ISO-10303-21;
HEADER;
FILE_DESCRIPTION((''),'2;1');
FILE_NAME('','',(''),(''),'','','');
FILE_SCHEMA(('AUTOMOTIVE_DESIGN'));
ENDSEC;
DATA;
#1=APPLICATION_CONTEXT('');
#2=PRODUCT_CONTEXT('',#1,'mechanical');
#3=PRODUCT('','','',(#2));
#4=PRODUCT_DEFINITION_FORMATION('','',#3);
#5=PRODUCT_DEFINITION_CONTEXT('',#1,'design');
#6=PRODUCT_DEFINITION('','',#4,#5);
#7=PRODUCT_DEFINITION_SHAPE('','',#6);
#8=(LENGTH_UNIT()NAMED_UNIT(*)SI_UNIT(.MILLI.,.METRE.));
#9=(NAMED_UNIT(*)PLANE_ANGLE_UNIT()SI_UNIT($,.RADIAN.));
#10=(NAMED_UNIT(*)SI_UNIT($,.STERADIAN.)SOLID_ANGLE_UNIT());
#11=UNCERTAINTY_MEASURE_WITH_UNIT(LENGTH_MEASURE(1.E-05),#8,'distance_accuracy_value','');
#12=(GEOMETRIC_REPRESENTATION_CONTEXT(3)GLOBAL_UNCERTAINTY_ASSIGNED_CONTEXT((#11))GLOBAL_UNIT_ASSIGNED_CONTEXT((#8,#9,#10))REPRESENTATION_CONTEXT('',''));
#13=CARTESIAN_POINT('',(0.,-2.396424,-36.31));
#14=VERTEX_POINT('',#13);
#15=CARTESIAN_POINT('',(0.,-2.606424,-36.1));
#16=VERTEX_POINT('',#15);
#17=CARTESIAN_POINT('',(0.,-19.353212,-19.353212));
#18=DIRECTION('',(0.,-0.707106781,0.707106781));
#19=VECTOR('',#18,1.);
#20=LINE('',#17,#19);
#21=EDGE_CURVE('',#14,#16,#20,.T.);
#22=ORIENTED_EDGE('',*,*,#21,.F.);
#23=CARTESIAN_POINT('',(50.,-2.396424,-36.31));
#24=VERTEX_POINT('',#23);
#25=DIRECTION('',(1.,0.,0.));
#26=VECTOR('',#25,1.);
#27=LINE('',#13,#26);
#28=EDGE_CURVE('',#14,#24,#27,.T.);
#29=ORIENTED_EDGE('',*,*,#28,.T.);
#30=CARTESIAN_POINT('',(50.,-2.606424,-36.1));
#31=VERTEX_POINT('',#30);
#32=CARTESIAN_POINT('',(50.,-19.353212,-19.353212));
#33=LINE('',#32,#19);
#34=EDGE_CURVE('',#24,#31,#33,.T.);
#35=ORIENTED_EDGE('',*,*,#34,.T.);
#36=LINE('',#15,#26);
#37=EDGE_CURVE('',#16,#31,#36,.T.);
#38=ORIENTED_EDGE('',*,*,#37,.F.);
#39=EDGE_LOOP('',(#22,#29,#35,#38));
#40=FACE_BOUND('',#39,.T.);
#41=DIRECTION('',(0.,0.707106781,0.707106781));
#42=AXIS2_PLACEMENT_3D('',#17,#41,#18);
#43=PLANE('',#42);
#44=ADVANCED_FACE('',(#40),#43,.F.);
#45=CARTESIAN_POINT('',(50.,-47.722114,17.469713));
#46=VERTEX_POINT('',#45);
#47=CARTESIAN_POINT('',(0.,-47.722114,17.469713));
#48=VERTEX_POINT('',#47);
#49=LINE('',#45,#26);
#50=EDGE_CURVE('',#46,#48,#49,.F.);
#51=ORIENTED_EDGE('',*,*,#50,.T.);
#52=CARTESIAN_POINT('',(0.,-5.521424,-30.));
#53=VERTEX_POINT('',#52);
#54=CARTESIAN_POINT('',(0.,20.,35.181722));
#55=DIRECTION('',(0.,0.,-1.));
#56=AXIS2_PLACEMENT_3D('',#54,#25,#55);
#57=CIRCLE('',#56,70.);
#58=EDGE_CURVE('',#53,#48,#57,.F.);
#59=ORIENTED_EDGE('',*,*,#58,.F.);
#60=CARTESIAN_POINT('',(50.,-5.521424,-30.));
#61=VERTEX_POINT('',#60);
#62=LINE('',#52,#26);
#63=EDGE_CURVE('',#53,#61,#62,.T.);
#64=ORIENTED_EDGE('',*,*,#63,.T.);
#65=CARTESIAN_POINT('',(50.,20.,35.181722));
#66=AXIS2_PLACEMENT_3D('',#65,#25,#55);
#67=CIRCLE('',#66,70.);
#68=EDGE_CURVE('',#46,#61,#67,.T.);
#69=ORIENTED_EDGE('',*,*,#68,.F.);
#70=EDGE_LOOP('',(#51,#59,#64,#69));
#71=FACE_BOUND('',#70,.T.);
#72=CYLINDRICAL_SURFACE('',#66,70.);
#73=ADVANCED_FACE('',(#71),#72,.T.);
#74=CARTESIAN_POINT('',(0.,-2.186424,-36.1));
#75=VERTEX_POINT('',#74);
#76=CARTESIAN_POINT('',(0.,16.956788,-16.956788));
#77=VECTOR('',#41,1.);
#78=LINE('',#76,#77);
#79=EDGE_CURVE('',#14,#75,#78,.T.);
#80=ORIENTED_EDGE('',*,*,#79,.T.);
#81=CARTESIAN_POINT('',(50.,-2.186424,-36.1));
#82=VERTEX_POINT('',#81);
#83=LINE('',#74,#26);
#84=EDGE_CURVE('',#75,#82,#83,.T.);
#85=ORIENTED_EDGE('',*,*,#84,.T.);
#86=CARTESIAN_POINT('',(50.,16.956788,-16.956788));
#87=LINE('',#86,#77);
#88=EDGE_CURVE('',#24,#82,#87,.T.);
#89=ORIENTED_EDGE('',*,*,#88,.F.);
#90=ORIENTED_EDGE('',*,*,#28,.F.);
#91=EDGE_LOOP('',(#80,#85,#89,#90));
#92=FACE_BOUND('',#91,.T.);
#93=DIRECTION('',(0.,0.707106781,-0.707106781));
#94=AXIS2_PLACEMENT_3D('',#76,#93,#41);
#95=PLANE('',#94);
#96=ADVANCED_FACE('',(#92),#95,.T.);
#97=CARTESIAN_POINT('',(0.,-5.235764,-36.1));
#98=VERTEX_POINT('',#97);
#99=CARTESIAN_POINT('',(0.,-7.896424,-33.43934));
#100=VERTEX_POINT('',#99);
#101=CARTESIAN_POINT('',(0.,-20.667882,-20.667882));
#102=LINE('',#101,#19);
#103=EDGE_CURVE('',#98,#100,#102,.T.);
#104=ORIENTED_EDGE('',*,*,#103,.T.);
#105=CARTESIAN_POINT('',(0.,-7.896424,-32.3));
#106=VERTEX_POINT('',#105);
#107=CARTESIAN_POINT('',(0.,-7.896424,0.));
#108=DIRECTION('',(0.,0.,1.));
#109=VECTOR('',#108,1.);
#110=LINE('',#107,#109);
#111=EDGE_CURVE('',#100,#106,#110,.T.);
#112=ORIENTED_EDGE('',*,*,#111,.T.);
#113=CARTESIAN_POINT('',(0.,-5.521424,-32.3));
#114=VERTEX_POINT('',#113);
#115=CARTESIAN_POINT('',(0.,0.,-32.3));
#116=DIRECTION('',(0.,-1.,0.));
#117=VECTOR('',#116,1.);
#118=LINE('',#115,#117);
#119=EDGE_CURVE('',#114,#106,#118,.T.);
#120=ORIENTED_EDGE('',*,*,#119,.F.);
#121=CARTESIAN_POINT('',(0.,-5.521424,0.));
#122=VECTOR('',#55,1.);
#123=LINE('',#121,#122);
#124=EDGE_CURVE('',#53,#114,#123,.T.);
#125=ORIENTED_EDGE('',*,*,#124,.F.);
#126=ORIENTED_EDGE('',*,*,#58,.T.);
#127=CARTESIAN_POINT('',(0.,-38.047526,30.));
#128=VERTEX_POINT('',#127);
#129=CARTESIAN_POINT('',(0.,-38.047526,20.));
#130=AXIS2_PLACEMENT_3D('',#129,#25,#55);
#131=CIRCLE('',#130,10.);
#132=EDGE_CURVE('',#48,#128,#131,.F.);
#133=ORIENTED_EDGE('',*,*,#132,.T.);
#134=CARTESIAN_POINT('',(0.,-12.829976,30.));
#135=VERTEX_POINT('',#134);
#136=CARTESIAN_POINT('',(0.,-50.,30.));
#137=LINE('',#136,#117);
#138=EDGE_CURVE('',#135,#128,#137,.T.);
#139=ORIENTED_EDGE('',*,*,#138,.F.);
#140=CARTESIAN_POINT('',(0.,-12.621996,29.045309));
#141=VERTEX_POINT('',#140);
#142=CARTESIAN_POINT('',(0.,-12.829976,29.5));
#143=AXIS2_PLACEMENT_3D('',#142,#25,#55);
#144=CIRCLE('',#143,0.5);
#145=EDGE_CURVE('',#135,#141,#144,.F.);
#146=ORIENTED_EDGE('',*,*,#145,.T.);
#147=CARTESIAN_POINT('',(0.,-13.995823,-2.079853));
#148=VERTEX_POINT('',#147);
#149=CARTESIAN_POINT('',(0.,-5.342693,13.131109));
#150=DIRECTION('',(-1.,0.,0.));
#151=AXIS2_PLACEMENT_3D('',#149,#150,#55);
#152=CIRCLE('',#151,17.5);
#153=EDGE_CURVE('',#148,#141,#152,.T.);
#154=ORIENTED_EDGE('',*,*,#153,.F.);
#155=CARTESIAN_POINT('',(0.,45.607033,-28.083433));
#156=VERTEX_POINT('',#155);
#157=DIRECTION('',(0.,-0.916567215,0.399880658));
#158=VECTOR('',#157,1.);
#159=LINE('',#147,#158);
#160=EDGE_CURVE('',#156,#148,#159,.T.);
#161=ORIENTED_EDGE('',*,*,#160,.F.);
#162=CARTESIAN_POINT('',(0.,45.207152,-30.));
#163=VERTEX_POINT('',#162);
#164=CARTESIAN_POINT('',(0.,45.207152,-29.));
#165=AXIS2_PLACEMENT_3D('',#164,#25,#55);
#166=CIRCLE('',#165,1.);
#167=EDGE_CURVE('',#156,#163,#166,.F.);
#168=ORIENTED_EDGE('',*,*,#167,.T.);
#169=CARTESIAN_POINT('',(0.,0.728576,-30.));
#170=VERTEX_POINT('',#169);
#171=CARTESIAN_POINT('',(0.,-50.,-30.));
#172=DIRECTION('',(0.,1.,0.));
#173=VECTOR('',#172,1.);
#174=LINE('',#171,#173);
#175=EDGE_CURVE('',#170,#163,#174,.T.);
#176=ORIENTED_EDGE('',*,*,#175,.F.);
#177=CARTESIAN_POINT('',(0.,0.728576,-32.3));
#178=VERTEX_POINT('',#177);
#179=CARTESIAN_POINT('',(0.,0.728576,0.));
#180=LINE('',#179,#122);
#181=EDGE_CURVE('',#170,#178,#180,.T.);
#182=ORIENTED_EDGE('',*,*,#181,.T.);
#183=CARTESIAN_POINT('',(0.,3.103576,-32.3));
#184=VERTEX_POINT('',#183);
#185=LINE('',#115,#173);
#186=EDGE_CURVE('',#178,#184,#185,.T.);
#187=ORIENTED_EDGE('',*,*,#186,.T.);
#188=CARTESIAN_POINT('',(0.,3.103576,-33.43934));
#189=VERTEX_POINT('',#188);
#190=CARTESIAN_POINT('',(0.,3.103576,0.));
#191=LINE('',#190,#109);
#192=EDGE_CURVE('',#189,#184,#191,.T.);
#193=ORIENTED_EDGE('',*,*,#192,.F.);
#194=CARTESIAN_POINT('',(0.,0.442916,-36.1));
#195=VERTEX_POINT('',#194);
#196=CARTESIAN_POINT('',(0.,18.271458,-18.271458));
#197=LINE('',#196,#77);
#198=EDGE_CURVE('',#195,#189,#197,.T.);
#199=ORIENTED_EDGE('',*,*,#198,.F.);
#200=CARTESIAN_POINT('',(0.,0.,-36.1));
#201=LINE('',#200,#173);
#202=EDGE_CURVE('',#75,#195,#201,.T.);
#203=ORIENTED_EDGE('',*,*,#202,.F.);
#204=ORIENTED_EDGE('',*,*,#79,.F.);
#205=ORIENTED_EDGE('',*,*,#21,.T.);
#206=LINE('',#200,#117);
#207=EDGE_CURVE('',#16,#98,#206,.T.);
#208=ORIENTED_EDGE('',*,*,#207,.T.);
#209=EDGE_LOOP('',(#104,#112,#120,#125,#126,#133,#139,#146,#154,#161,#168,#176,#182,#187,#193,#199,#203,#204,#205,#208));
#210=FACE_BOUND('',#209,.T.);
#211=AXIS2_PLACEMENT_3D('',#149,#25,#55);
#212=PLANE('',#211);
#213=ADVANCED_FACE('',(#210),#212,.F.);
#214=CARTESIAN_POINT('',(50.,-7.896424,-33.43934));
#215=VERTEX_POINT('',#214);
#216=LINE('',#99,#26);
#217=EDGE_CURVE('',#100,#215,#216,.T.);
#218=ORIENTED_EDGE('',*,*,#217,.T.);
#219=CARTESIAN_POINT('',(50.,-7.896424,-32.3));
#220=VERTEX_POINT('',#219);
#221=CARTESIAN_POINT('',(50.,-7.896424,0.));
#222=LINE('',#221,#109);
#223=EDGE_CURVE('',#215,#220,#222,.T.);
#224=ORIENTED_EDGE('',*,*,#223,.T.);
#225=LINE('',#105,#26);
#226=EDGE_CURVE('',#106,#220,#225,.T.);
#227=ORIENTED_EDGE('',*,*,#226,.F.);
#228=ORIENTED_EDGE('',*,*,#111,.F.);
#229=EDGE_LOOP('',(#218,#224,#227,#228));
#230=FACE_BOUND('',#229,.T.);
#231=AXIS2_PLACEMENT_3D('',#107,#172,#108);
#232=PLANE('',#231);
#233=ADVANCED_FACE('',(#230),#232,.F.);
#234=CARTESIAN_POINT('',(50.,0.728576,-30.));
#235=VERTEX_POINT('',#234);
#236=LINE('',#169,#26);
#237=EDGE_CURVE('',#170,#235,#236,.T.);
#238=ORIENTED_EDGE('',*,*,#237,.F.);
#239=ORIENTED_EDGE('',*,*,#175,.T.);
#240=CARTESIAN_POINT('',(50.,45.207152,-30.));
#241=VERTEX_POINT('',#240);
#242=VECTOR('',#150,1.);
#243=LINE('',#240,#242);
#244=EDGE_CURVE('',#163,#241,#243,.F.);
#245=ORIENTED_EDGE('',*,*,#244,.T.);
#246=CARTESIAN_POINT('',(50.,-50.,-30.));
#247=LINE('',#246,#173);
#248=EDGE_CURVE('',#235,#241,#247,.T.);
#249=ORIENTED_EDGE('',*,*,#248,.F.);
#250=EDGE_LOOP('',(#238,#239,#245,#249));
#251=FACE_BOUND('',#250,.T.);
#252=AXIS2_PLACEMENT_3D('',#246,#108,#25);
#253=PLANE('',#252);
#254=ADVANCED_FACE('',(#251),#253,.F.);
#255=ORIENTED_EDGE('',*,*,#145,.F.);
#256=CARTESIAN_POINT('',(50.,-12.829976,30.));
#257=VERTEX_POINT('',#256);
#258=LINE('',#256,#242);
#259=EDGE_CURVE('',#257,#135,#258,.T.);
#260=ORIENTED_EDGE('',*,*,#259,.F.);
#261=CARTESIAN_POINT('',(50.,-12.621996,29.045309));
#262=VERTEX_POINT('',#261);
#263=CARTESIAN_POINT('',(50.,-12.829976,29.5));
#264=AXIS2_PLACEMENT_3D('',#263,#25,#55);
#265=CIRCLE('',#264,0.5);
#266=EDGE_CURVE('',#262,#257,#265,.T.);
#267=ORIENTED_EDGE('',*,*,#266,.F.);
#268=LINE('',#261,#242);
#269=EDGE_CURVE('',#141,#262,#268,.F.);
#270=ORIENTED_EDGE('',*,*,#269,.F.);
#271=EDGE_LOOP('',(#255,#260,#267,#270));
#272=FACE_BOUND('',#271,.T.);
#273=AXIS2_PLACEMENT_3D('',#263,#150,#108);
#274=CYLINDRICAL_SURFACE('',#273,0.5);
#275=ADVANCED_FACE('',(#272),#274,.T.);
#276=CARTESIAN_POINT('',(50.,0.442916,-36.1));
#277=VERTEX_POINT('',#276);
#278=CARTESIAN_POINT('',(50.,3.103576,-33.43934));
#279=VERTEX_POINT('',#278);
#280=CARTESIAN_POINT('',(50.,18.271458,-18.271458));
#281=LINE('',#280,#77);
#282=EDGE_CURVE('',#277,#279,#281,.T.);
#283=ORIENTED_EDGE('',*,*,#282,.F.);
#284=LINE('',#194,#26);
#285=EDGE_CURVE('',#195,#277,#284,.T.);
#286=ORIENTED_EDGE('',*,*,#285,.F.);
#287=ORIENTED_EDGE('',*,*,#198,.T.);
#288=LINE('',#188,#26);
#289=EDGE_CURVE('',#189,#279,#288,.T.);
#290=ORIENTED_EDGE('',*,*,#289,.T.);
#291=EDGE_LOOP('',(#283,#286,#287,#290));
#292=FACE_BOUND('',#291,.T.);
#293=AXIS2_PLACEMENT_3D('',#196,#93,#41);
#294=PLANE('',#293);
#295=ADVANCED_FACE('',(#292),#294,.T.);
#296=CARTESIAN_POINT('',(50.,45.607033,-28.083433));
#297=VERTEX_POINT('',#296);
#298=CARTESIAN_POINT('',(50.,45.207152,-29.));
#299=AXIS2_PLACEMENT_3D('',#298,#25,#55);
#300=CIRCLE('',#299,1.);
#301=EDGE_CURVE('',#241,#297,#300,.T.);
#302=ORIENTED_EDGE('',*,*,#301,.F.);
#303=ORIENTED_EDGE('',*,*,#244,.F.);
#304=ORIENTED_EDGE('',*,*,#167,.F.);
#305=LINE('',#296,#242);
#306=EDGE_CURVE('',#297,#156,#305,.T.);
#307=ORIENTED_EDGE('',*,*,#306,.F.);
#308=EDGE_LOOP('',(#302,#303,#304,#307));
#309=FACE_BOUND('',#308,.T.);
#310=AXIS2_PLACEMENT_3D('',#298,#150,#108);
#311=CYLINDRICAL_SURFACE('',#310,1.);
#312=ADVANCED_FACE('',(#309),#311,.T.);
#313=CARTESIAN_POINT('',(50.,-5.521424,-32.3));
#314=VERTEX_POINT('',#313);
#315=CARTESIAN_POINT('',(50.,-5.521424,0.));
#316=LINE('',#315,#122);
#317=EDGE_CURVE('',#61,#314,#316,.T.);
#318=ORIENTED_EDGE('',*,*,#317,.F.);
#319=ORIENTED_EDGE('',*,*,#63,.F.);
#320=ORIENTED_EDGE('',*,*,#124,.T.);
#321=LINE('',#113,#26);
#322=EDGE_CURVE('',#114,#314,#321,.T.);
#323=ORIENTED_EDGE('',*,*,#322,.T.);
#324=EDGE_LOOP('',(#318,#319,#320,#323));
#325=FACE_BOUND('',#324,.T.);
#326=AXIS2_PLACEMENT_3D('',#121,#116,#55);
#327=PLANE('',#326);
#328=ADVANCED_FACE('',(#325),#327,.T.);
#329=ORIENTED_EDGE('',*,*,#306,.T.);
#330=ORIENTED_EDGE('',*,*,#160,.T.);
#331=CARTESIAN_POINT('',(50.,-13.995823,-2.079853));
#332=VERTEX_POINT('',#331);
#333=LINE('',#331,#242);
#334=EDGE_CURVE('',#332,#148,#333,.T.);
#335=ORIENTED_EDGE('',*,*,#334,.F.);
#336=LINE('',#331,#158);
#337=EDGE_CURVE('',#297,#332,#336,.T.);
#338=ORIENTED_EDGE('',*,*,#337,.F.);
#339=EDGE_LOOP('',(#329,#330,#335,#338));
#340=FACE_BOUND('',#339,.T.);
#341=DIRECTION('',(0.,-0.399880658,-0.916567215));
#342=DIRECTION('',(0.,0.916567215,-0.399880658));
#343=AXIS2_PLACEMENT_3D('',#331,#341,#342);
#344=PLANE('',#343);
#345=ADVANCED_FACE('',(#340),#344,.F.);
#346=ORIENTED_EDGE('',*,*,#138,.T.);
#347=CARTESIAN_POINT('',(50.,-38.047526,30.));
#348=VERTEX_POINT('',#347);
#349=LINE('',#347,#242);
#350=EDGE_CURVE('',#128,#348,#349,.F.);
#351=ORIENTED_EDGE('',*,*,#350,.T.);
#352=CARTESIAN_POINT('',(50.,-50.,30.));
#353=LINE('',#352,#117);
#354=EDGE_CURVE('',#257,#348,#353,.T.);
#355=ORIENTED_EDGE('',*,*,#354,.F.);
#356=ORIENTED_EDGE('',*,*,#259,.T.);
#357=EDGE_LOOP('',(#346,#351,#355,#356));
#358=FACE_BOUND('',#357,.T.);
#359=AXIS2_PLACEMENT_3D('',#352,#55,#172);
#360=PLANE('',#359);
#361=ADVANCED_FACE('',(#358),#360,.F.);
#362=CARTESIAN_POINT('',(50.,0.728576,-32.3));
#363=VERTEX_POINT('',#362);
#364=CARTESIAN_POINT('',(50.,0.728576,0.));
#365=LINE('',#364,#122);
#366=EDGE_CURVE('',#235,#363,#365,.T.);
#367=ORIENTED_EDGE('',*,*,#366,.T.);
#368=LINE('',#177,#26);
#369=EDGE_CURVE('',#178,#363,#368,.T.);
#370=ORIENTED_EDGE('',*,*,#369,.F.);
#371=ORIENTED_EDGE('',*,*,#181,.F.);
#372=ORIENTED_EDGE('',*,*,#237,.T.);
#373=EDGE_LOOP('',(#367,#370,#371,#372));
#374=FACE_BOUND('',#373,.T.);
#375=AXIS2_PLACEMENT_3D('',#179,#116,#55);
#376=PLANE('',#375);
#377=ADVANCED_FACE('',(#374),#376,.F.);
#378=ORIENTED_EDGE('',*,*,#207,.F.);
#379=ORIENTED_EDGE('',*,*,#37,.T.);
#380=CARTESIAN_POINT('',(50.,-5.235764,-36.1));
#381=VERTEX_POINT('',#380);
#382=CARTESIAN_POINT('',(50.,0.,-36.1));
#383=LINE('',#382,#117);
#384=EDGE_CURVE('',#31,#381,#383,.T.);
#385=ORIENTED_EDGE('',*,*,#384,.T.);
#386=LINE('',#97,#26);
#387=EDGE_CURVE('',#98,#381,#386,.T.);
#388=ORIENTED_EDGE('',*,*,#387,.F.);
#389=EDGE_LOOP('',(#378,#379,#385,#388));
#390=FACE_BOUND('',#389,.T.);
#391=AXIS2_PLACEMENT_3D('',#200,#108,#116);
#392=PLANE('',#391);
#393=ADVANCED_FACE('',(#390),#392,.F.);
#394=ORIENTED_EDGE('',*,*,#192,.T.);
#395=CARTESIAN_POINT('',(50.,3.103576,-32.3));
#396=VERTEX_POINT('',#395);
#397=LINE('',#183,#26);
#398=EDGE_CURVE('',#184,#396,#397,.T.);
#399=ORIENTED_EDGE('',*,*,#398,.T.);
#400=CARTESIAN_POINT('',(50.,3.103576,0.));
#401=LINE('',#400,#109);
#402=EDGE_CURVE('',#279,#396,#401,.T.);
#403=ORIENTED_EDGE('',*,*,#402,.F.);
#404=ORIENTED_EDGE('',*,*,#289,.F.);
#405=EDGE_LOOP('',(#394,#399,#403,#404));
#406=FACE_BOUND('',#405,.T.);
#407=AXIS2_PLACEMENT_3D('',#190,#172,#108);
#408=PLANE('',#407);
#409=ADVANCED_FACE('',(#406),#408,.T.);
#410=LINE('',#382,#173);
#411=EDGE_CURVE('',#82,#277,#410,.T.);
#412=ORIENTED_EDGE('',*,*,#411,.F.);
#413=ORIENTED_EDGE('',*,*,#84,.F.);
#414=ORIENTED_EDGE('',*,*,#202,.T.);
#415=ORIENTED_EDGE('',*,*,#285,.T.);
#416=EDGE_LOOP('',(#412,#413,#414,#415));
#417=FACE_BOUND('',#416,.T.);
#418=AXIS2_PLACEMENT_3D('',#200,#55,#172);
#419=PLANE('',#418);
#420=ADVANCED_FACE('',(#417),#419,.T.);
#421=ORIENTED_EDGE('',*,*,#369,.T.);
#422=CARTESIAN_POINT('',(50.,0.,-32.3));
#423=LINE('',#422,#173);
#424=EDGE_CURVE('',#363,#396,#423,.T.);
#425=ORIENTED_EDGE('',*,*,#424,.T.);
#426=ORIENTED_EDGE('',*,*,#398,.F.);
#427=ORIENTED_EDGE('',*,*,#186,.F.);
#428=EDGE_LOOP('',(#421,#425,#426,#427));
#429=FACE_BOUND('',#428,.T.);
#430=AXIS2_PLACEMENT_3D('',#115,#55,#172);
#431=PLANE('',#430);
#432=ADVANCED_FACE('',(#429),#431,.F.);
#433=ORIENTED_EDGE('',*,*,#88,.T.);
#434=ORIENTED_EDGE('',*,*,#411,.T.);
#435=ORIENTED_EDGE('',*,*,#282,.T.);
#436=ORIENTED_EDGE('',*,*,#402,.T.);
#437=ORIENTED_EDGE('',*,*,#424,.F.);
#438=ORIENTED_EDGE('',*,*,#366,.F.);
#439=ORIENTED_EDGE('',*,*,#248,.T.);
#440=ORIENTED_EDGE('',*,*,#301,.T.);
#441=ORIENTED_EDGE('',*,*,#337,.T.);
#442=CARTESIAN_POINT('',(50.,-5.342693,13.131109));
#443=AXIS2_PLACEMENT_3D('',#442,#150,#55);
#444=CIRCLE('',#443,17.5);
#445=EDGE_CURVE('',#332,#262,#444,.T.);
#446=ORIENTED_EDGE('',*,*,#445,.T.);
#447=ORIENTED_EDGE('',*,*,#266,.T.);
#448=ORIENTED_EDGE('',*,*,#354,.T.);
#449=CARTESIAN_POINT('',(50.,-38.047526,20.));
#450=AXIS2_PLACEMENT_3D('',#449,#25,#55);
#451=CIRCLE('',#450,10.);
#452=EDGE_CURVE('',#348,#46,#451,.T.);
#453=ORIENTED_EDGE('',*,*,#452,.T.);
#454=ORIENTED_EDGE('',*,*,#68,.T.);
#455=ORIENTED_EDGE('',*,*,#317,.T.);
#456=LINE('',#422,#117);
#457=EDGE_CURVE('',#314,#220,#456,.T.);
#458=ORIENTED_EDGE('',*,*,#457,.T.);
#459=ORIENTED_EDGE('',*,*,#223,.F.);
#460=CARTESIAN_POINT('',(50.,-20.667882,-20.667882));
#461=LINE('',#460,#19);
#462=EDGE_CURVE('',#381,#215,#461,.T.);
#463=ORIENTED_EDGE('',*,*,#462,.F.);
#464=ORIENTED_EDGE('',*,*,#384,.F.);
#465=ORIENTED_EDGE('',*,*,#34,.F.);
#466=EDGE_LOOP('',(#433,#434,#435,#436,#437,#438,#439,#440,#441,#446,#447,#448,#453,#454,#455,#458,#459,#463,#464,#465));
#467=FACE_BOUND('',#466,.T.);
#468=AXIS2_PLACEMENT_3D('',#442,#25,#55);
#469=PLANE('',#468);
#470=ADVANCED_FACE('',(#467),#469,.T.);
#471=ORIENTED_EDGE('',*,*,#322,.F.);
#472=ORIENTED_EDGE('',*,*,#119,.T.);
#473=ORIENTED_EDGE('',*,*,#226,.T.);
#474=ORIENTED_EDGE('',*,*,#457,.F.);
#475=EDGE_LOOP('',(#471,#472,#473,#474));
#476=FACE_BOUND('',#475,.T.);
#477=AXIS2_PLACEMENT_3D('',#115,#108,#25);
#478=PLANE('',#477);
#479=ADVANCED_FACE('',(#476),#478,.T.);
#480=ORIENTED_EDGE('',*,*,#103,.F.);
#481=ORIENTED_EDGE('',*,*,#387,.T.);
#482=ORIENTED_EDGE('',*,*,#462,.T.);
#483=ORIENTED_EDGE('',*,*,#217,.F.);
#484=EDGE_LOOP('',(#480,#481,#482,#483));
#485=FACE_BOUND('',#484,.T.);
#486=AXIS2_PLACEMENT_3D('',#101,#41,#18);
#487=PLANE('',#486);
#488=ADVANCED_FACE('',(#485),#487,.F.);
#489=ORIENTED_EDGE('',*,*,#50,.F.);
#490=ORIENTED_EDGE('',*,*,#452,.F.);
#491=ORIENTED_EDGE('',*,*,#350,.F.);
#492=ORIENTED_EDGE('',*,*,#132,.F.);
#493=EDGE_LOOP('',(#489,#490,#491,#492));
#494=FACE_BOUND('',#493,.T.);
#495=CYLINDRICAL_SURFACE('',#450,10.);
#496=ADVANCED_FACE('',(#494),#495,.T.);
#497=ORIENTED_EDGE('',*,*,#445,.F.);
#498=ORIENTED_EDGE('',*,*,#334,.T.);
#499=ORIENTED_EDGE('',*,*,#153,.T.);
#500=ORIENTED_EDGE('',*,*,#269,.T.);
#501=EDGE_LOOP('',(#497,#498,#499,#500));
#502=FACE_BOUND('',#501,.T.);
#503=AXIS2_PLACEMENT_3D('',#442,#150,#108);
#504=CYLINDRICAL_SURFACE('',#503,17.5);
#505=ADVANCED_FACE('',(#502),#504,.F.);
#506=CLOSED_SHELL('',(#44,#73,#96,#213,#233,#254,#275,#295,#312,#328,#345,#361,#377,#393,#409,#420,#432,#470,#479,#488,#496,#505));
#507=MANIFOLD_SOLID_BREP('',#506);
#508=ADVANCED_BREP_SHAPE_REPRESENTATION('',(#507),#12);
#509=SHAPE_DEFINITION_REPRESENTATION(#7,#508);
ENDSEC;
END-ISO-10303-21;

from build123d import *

# Parameters (mm, degrees)
BOSS_EXTRUDE1_DEPTH = 50
FILLET1_R           = 1
FILLET2_R           = 0.5
BOSS_EXTRUDE2_DEPTH = 50
FILLET3_R           = 70
FILLET4_R           = 10


with BuildPart() as part:
    # Sketch1 → Boss-Extrude1 (new body)
    with BuildSketch(Plane(origin=(0, 0, 0), x_dir=(0, 0, -1), z_dir=(1, 0, 0))):
        with BuildLine():
            Line((-30, -50), (30, -50))
            Line((30, -50), (30, 50))
            Line((30, 50), (2.079852522, -13.995823026))
            ThreePointArc((2.079852522, -13.995823026), (-15.294169853, -22.708497617), (-30, -10))
            Line((-30, -10), (-30, -50))
        make_face()
    extrude(amount=BOSS_EXTRUDE1_DEPTH)

    # Fillet1
    fillet1_edges = [part.edges().sort_by_distance(p)[0] for p in [
        (25, 50, -30),
    ]]
    fillet(fillet1_edges, radius=FILLET1_R)

    # Fillet2
    fillet2_edges = [part.edges().sort_by_distance(p)[0] for p in [
        (25, -10, 30),
    ]]
    fillet(fillet2_edges, radius=FILLET2_R)

    # Sketch2 → Boss-Extrude2 (add)
    with BuildSketch(Plane(origin=(50, 0, 0), x_dir=(0, 0, -1), z_dir=(1, 0, 0))):
        Polygon((31.455, 0.728575996), (30, 0.728575996), (30, -5.521424004), (31.455, -5.521424004), (31.8, -5.521424004), (32.3, -5.521424004), (32.3, -7.896424004), (33.439339828, -7.896424004), (36.1, -5.235763833), (36.1, -2.606424004), (36.31, -2.396424004), (36.1, -2.186424004), (36.1, 0.442915824), (33.439339828, 3.103575996), (32.3, 3.103575996), (32.3, 0.728575996), (31.8, 0.728575996), align=None)
    extrude(amount=-BOSS_EXTRUDE2_DEPTH)

    # Fillet3
    # the kernel refuses this fillet: 70 mm, written as the material it takes off along each edge
    with BuildSketch(Plane(origin=(-162.95430565, -50, -30), x_dir=(0, 0, 1), z_dir=(1, 0, 0))) as fillet3_piece_1:
        with BuildLine():
            CenterArc((65.18172226, -70), FILLET3_R, 90, 68.617538212)
            Line((0, -44.478575996), (0, 0))
            Line((0, 0), (65.18172226, 0))
        make_face()
    extrude(amount=375.9086113, mode=Mode.SUBTRACT)

    # Fillet4
    fillet4_edges = [part.edges().sort_by_distance(p)[0] for p in [
        (25, -49.807949078, 30),
    ]]
    fillet(fillet4_edges, radius=FILLET4_R)


solid = part.part
